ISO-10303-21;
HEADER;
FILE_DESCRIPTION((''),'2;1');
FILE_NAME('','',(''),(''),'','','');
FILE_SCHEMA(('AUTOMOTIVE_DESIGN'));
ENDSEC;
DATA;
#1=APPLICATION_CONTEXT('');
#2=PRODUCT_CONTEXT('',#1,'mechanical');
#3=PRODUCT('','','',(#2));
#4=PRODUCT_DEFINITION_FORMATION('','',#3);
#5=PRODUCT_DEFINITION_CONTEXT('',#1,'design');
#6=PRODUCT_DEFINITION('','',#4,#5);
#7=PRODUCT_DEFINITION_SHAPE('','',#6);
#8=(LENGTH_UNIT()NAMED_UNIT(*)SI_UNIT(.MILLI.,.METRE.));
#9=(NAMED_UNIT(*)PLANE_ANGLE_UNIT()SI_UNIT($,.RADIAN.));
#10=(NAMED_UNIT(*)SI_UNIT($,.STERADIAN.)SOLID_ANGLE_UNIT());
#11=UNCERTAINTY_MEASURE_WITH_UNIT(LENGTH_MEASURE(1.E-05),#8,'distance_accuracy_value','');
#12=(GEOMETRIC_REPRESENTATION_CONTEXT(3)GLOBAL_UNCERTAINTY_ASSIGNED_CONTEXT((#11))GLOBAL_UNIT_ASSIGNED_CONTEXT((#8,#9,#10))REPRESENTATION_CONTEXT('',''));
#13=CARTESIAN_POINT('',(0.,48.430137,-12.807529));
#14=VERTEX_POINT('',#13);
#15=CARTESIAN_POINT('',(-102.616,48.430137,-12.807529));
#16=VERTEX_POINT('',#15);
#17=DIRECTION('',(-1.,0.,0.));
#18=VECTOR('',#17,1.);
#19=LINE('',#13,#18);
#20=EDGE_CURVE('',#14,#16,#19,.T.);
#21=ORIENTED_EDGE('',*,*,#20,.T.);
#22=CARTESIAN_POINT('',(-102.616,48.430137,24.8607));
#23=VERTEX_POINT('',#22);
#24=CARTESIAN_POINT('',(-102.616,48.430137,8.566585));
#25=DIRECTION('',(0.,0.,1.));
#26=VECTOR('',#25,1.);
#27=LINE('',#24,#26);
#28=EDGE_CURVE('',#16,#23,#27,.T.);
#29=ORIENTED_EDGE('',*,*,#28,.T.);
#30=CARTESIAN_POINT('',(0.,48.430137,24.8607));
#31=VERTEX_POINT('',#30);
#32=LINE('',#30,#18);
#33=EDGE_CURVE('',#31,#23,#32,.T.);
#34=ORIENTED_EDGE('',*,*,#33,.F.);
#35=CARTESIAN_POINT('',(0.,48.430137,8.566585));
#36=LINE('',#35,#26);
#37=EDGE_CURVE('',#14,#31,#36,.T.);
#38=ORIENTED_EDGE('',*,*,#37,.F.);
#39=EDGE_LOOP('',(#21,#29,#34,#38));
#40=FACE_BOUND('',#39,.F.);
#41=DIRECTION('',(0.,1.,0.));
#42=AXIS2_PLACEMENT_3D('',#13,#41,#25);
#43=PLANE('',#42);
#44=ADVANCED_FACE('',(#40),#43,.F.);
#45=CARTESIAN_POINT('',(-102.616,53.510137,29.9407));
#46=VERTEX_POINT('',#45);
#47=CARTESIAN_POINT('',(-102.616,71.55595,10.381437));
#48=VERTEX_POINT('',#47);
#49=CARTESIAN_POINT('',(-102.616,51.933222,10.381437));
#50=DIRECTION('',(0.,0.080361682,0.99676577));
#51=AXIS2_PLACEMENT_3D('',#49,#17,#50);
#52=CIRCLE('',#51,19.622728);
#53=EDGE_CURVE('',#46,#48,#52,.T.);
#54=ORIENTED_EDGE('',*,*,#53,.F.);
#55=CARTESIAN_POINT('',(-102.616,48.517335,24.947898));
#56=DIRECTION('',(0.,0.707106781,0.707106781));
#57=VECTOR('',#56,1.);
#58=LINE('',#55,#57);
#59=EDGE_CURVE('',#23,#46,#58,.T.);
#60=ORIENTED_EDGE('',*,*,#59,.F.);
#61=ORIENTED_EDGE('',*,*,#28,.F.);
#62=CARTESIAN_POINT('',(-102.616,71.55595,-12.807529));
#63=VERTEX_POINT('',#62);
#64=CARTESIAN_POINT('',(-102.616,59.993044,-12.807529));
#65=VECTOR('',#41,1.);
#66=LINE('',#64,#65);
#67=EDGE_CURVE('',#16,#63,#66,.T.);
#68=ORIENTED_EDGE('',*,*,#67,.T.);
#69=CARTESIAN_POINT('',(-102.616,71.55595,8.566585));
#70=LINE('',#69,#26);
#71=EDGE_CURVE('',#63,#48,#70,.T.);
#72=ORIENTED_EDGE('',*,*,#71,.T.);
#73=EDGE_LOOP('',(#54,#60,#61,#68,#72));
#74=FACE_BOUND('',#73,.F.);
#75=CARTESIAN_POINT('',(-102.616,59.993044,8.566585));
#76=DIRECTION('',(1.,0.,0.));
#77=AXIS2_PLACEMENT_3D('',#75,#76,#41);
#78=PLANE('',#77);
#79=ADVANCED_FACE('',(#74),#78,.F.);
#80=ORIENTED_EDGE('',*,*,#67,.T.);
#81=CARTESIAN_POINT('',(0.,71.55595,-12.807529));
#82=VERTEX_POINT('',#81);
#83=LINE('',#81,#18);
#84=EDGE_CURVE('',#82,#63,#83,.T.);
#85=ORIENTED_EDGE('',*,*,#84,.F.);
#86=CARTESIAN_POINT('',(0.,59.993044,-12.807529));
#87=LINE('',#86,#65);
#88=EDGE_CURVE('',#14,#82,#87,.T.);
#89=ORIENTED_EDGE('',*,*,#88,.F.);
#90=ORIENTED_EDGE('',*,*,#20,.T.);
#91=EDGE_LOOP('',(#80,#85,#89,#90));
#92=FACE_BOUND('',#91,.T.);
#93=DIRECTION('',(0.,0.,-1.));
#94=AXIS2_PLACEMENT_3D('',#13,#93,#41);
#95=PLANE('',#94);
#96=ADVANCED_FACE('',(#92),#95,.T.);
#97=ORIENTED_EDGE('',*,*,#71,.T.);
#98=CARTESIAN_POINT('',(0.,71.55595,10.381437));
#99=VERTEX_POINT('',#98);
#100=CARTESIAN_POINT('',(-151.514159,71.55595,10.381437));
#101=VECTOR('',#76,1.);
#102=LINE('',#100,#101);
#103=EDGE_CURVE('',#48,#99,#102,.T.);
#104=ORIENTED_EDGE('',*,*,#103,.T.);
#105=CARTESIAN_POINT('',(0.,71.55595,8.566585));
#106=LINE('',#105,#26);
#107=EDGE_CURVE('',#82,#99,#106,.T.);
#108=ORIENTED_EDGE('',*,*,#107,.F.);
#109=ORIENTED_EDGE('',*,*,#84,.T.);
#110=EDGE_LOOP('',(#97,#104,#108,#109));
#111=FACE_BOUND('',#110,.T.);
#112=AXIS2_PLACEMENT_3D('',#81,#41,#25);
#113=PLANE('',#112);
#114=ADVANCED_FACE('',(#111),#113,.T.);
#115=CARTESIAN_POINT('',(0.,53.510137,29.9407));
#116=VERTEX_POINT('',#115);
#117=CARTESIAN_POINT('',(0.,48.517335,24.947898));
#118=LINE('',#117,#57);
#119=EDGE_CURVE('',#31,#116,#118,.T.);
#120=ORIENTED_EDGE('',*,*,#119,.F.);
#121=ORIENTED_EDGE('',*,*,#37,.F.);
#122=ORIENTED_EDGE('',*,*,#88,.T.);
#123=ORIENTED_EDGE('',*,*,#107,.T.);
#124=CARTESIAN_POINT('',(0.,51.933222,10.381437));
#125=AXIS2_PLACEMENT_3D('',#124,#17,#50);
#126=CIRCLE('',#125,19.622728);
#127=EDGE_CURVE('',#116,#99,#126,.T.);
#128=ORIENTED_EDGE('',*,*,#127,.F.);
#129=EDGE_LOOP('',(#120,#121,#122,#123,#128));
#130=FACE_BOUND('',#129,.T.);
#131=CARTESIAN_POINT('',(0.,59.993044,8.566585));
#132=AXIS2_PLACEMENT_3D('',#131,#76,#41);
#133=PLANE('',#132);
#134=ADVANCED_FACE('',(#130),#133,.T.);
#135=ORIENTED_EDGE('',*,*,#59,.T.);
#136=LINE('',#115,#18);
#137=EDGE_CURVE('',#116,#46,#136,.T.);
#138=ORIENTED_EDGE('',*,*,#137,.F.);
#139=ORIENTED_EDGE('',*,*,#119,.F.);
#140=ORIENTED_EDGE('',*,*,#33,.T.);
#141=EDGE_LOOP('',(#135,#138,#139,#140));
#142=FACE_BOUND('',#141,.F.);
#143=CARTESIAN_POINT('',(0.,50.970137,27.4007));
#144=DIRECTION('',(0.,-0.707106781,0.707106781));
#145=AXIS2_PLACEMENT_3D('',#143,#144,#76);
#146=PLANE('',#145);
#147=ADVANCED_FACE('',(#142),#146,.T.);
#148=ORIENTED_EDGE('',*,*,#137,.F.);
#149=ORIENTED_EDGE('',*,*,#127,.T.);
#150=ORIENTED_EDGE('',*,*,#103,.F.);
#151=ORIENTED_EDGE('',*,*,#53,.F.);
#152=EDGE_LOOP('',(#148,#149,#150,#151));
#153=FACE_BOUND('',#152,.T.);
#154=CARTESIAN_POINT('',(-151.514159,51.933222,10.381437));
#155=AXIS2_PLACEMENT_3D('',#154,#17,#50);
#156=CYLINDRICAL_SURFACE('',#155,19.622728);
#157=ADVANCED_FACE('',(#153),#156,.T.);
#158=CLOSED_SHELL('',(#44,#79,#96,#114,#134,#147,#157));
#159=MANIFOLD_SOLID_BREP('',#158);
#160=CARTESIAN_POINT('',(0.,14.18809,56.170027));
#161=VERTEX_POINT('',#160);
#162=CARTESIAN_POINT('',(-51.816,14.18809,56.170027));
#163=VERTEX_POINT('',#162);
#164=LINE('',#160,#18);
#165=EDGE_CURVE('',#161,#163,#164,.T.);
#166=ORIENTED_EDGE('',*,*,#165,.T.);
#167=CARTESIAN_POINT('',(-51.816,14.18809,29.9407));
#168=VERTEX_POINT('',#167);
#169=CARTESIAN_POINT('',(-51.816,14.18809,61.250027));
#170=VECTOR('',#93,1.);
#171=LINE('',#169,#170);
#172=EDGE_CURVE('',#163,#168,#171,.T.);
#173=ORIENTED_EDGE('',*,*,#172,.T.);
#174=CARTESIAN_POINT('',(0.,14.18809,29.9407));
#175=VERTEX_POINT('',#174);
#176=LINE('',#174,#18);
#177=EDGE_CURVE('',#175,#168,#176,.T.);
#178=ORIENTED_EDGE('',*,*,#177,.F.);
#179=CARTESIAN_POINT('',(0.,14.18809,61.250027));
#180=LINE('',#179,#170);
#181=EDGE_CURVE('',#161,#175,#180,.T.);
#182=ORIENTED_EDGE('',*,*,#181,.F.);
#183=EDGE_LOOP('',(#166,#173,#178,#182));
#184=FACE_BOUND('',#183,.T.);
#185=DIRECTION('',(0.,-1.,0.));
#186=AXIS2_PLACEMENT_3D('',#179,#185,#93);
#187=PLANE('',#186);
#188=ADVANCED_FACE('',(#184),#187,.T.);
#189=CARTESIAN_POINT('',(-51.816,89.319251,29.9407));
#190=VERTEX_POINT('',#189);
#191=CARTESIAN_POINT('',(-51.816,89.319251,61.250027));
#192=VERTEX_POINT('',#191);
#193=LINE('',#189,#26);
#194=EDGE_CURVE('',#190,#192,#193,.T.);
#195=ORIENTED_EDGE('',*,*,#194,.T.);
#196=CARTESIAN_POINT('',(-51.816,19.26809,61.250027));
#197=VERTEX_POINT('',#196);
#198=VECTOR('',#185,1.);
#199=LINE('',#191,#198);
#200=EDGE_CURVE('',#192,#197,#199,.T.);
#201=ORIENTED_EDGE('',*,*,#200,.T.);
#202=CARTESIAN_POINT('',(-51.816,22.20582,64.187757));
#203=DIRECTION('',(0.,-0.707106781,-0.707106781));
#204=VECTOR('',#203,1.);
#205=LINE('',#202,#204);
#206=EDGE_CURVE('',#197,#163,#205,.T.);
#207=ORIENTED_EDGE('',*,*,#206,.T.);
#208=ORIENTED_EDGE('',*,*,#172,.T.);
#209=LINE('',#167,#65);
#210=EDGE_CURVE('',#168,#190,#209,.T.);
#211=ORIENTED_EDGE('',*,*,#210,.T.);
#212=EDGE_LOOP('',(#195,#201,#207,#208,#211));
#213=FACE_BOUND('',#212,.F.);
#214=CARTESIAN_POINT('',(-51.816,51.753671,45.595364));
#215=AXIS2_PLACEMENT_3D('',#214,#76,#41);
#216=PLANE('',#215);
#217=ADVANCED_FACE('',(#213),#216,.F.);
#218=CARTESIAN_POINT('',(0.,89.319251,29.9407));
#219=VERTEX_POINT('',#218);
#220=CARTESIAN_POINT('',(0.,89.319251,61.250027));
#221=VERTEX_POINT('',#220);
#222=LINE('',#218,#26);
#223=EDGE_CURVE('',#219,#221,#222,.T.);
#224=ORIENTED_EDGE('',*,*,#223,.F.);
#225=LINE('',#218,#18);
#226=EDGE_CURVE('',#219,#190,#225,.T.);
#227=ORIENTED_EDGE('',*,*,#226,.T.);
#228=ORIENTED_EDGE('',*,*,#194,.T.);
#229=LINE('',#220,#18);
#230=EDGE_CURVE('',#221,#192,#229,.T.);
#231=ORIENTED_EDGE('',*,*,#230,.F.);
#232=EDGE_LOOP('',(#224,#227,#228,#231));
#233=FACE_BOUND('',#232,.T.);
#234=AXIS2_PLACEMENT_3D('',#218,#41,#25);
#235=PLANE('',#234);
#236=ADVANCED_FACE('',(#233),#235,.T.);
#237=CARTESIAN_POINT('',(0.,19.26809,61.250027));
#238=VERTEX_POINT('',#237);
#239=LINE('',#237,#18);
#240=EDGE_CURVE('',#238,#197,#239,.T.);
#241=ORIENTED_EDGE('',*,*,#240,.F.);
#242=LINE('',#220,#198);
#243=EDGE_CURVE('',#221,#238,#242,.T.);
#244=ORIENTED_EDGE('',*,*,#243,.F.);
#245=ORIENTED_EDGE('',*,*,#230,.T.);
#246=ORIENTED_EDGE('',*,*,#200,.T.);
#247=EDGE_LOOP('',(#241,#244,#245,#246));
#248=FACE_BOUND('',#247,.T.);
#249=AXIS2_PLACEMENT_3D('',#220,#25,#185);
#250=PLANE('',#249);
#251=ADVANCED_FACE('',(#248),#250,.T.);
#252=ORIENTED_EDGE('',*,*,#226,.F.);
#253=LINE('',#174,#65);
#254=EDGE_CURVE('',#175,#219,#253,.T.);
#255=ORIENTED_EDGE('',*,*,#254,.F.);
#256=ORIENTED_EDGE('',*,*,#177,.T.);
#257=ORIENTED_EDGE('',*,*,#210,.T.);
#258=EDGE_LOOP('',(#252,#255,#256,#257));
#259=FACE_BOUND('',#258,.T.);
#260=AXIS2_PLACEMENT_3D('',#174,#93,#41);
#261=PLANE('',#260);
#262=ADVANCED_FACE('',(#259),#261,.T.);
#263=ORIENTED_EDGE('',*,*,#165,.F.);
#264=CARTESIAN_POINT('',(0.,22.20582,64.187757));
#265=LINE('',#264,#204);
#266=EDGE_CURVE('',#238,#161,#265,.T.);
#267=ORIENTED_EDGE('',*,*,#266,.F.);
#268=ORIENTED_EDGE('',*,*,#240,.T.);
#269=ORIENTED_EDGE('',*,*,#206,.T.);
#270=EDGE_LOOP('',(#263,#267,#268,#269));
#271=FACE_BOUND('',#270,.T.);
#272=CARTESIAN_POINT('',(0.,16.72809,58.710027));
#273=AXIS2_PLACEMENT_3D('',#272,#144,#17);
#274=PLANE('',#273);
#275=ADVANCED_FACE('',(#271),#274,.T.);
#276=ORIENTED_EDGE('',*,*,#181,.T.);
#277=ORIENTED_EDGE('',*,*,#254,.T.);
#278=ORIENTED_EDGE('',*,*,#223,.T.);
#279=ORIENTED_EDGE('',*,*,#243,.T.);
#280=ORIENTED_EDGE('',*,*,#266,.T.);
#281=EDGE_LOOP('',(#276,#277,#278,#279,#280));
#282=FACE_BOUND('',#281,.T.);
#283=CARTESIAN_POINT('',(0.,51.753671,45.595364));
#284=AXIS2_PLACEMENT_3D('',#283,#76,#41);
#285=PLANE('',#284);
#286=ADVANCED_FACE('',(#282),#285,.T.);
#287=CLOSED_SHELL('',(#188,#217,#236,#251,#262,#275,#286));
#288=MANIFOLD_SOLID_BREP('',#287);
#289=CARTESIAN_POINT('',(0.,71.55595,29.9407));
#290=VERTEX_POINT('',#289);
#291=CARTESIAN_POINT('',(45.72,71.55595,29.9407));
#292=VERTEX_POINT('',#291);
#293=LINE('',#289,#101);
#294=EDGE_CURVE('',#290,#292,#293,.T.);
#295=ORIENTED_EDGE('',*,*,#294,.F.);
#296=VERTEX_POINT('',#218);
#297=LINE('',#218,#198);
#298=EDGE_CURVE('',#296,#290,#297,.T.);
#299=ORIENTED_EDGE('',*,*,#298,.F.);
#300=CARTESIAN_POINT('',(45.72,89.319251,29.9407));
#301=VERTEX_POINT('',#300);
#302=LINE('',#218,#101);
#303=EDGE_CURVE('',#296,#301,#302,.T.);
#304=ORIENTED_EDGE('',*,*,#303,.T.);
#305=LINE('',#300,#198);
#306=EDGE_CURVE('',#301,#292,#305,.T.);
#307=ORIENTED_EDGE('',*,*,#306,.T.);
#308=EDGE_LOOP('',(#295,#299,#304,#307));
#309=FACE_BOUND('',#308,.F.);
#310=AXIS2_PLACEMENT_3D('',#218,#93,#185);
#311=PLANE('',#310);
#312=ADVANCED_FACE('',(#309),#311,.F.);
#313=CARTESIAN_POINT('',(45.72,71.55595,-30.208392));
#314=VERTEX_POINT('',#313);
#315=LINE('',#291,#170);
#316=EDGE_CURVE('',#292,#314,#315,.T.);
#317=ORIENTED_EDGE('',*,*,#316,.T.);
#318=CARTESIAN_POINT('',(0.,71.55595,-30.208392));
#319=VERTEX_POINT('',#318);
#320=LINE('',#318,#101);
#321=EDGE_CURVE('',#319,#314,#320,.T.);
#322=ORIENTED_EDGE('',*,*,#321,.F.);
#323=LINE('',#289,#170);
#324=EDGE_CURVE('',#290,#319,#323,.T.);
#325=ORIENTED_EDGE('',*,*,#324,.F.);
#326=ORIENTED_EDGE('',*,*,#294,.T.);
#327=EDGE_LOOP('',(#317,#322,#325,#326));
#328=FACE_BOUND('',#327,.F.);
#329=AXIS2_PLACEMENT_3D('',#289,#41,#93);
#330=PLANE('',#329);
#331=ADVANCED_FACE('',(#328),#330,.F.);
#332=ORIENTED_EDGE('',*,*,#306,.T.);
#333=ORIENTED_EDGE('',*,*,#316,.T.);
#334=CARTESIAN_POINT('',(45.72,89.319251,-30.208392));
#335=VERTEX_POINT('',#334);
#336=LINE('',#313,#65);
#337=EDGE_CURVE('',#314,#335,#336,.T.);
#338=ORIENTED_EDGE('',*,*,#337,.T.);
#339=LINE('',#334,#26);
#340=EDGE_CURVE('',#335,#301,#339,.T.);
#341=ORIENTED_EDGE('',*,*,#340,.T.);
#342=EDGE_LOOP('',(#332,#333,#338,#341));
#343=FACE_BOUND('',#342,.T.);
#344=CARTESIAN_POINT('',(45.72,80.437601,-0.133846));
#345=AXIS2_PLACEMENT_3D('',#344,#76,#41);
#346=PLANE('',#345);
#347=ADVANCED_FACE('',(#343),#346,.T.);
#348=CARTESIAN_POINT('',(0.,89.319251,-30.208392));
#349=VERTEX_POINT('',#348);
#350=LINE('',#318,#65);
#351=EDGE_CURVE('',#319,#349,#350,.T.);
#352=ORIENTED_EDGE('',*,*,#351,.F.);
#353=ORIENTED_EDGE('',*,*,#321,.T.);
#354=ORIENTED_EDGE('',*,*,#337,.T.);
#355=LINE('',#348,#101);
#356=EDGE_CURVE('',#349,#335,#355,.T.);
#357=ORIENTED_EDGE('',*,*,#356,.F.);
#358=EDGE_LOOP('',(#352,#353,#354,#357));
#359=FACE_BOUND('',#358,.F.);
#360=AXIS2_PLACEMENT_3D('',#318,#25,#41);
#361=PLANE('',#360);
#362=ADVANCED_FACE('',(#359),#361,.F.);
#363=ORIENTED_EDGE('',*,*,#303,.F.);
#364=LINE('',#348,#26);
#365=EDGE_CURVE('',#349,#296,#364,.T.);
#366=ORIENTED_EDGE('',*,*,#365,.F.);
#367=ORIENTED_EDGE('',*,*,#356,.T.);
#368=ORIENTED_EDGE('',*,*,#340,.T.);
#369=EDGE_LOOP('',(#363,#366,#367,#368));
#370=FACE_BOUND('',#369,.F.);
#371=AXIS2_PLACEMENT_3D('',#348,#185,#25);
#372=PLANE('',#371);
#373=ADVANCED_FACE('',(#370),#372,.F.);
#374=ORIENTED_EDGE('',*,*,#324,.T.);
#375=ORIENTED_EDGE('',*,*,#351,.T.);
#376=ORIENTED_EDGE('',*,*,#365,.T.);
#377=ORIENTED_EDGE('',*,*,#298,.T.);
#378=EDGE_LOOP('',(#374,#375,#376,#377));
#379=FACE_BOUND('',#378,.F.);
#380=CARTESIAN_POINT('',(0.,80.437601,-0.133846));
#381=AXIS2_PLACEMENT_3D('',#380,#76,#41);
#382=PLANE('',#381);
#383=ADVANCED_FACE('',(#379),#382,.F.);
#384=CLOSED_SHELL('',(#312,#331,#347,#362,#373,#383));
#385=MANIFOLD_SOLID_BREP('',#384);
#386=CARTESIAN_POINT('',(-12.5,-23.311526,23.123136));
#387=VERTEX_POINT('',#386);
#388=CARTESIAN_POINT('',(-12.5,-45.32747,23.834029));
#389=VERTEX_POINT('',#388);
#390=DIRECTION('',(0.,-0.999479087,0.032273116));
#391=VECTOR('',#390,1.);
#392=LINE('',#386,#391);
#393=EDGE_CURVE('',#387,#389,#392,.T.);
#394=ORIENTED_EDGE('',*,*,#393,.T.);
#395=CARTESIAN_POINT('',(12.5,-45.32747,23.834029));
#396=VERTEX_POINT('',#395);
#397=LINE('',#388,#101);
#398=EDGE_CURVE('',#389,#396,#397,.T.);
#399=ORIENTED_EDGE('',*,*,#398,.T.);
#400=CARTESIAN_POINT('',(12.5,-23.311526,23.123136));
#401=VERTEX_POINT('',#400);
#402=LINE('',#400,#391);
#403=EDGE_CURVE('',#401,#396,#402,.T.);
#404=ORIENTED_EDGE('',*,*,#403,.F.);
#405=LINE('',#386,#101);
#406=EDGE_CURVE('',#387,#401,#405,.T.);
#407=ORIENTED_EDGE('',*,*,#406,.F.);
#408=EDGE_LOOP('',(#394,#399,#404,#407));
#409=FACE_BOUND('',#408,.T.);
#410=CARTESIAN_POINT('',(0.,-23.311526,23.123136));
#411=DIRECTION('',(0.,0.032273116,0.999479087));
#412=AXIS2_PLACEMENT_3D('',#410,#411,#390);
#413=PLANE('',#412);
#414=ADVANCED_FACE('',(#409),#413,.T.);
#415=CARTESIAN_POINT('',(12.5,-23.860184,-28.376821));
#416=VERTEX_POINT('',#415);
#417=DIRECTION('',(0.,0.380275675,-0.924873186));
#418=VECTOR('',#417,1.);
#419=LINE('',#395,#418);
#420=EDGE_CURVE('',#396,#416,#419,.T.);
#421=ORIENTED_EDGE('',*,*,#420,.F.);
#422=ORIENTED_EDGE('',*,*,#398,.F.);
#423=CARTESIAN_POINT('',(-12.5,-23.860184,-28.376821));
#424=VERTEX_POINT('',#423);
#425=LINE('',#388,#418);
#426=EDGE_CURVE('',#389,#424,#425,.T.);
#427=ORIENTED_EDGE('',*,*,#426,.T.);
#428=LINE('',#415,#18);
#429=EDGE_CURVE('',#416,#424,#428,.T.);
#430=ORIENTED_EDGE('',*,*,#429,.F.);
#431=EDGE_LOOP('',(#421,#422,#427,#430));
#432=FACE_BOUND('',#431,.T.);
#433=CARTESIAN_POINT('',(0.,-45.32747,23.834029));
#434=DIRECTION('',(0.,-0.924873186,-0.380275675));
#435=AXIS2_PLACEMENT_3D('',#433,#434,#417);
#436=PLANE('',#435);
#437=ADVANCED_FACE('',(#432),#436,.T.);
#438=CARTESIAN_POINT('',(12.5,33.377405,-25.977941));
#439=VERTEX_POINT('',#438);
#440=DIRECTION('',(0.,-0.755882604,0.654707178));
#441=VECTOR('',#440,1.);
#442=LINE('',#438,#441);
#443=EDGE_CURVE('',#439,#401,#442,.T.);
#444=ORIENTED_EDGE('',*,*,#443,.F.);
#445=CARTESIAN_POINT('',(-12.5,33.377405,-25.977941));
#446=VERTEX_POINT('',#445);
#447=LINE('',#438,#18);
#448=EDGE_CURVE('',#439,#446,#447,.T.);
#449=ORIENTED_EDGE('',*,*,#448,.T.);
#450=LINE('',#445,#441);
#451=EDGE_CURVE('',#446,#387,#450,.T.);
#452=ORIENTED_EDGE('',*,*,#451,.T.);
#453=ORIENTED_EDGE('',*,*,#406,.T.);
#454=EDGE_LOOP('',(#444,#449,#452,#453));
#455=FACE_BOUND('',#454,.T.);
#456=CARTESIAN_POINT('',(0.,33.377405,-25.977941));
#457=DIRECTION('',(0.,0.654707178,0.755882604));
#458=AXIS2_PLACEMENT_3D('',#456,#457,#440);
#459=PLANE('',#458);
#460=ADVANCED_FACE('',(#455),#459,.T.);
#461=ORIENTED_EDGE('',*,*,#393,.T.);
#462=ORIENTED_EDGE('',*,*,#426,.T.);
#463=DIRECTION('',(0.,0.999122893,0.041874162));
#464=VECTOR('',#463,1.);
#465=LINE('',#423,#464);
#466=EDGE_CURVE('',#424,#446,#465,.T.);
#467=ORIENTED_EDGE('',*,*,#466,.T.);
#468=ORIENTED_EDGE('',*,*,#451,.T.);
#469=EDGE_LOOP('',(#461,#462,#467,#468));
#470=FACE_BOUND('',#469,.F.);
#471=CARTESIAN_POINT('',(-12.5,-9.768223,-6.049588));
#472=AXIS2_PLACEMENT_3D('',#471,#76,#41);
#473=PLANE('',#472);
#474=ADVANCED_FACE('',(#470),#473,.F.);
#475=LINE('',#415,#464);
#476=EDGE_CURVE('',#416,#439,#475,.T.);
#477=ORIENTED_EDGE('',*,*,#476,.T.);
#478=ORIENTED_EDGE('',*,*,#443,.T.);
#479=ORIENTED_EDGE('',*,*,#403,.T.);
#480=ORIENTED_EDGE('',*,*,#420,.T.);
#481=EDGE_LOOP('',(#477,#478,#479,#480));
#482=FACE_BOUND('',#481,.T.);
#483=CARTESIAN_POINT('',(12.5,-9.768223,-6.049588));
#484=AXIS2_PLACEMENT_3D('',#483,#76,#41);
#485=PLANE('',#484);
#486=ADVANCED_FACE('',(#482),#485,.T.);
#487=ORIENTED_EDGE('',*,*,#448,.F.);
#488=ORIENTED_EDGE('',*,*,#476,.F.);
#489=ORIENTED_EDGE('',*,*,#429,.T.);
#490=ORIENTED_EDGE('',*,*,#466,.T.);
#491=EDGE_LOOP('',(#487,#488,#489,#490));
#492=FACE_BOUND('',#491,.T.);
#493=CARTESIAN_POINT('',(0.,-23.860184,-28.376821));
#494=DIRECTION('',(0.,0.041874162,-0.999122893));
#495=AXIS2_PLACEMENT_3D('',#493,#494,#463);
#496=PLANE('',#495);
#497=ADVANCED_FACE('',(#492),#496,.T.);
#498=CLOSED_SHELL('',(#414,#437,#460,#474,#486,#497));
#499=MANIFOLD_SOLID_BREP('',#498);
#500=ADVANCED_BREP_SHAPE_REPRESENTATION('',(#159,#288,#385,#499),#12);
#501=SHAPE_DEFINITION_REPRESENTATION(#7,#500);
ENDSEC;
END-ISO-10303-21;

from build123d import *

# Parameters (mm, degrees)
F0_W        = 23.1258124113
F0_H        = 42.7482295781
F1_DEPTH    = 102.616
F2_DEPTH    = 51.816
F3_DEPTH    = 45.72
F4_SIZE     = 5.08
F4_2_SIZE   = 5.08
F5_T1_DEPTH = 200.4123170871
F7_DEPTH    = 12.5


# Not quite as in the source:
# - a fillet or chamfer that OpenCascade refuses, or shapes differently, is made with other operations: its cross-section is extruded or revolved along the edge and cut away or added
# - a feature of the source that left no trace in its solid (it failed there, or was rolled back) is left out


with BuildPart() as f1:
    # F0 (on Right) → F1 (new body)
    with BuildSketch(Plane.YZ):
        with Locations((59.9930435419, 8.5665853694)):
            Rectangle(F0_W, F0_H)
    extrude(amount=-F1_DEPTH)

    # F4
    f4_edges = [f1.edges().sort_by_distance(p)[0] for p in [
        (-51.308, 48.430137, 29.9407),
    ]]
    chamfer(f4_edges, length=F4_SIZE)

    # F5: fillet of radius 19.622727835 on 1 edges, made by hand

    # F5_s2 → F5_t1 (cut)
    with BuildSketch(Plane.YZ.offset(-151.5141585435)):
        with BuildLine():
            ThreePointArc((53.5101373363, 29.9407001585), (66.355337393, 23.687601957), (71.5559497476, 10.3814367411))
            Line((71.5559497476, 10.3814367411), (71.5559497476, 29.9407001585))
            Line((71.5559497476, 29.9407001585), (53.5101373363, 29.9407001585))
        make_face()
    extrude(amount=F5_T1_DEPTH, mode=Mode.SUBTRACT)


with BuildPart() as f2:
    # F0 (on Right) → F2 (new body)
    with BuildSketch(Plane.YZ):
        Polygon((89.3192514777, 29.9407001585), (89.3192514777, 61.2500272691), (14.1880903393, 61.2500272691), (14.1880903393, 29.9407001585), (48.4301373363, 29.9407001585), (71.5559497476, 29.9407001585), align=None)
    extrude(amount=-F2_DEPTH)

    # F4#2
    f4_2_edges = [f2.edges().sort_by_distance(p)[0] for p in [
        (-25.908, 14.18809, 61.250027),
    ]]
    chamfer(f4_2_edges, length=F4_2_SIZE)


with BuildPart() as f3:
    # F0 (on Right) → F3 (new body)
    with BuildSketch(Plane.YZ):
        Polygon((89.3192514777, -30.2083920687), (89.3192514777, 29.9407001585), (71.5559497476, 29.9407001585), (71.5559497476, -12.8075294197), (71.5559497476, -30.2083920687), align=None)
    extrude(amount=F3_DEPTH)


with BuildPart() as f7:
    # F0 (on Right) → F7 (new body, symmetric)
    with BuildSketch(Plane.YZ):
        Polygon((33.377405256, -25.9779412299), (-23.3115255833, 23.1231357902), (-45.3274697065, 23.8340292126), (-23.8601844758, -28.3768214285), align=None)
    extrude(amount=F7_DEPTH, both=True)


solid = Compound([f1.part, f2.part, f3.part, f7.part])
